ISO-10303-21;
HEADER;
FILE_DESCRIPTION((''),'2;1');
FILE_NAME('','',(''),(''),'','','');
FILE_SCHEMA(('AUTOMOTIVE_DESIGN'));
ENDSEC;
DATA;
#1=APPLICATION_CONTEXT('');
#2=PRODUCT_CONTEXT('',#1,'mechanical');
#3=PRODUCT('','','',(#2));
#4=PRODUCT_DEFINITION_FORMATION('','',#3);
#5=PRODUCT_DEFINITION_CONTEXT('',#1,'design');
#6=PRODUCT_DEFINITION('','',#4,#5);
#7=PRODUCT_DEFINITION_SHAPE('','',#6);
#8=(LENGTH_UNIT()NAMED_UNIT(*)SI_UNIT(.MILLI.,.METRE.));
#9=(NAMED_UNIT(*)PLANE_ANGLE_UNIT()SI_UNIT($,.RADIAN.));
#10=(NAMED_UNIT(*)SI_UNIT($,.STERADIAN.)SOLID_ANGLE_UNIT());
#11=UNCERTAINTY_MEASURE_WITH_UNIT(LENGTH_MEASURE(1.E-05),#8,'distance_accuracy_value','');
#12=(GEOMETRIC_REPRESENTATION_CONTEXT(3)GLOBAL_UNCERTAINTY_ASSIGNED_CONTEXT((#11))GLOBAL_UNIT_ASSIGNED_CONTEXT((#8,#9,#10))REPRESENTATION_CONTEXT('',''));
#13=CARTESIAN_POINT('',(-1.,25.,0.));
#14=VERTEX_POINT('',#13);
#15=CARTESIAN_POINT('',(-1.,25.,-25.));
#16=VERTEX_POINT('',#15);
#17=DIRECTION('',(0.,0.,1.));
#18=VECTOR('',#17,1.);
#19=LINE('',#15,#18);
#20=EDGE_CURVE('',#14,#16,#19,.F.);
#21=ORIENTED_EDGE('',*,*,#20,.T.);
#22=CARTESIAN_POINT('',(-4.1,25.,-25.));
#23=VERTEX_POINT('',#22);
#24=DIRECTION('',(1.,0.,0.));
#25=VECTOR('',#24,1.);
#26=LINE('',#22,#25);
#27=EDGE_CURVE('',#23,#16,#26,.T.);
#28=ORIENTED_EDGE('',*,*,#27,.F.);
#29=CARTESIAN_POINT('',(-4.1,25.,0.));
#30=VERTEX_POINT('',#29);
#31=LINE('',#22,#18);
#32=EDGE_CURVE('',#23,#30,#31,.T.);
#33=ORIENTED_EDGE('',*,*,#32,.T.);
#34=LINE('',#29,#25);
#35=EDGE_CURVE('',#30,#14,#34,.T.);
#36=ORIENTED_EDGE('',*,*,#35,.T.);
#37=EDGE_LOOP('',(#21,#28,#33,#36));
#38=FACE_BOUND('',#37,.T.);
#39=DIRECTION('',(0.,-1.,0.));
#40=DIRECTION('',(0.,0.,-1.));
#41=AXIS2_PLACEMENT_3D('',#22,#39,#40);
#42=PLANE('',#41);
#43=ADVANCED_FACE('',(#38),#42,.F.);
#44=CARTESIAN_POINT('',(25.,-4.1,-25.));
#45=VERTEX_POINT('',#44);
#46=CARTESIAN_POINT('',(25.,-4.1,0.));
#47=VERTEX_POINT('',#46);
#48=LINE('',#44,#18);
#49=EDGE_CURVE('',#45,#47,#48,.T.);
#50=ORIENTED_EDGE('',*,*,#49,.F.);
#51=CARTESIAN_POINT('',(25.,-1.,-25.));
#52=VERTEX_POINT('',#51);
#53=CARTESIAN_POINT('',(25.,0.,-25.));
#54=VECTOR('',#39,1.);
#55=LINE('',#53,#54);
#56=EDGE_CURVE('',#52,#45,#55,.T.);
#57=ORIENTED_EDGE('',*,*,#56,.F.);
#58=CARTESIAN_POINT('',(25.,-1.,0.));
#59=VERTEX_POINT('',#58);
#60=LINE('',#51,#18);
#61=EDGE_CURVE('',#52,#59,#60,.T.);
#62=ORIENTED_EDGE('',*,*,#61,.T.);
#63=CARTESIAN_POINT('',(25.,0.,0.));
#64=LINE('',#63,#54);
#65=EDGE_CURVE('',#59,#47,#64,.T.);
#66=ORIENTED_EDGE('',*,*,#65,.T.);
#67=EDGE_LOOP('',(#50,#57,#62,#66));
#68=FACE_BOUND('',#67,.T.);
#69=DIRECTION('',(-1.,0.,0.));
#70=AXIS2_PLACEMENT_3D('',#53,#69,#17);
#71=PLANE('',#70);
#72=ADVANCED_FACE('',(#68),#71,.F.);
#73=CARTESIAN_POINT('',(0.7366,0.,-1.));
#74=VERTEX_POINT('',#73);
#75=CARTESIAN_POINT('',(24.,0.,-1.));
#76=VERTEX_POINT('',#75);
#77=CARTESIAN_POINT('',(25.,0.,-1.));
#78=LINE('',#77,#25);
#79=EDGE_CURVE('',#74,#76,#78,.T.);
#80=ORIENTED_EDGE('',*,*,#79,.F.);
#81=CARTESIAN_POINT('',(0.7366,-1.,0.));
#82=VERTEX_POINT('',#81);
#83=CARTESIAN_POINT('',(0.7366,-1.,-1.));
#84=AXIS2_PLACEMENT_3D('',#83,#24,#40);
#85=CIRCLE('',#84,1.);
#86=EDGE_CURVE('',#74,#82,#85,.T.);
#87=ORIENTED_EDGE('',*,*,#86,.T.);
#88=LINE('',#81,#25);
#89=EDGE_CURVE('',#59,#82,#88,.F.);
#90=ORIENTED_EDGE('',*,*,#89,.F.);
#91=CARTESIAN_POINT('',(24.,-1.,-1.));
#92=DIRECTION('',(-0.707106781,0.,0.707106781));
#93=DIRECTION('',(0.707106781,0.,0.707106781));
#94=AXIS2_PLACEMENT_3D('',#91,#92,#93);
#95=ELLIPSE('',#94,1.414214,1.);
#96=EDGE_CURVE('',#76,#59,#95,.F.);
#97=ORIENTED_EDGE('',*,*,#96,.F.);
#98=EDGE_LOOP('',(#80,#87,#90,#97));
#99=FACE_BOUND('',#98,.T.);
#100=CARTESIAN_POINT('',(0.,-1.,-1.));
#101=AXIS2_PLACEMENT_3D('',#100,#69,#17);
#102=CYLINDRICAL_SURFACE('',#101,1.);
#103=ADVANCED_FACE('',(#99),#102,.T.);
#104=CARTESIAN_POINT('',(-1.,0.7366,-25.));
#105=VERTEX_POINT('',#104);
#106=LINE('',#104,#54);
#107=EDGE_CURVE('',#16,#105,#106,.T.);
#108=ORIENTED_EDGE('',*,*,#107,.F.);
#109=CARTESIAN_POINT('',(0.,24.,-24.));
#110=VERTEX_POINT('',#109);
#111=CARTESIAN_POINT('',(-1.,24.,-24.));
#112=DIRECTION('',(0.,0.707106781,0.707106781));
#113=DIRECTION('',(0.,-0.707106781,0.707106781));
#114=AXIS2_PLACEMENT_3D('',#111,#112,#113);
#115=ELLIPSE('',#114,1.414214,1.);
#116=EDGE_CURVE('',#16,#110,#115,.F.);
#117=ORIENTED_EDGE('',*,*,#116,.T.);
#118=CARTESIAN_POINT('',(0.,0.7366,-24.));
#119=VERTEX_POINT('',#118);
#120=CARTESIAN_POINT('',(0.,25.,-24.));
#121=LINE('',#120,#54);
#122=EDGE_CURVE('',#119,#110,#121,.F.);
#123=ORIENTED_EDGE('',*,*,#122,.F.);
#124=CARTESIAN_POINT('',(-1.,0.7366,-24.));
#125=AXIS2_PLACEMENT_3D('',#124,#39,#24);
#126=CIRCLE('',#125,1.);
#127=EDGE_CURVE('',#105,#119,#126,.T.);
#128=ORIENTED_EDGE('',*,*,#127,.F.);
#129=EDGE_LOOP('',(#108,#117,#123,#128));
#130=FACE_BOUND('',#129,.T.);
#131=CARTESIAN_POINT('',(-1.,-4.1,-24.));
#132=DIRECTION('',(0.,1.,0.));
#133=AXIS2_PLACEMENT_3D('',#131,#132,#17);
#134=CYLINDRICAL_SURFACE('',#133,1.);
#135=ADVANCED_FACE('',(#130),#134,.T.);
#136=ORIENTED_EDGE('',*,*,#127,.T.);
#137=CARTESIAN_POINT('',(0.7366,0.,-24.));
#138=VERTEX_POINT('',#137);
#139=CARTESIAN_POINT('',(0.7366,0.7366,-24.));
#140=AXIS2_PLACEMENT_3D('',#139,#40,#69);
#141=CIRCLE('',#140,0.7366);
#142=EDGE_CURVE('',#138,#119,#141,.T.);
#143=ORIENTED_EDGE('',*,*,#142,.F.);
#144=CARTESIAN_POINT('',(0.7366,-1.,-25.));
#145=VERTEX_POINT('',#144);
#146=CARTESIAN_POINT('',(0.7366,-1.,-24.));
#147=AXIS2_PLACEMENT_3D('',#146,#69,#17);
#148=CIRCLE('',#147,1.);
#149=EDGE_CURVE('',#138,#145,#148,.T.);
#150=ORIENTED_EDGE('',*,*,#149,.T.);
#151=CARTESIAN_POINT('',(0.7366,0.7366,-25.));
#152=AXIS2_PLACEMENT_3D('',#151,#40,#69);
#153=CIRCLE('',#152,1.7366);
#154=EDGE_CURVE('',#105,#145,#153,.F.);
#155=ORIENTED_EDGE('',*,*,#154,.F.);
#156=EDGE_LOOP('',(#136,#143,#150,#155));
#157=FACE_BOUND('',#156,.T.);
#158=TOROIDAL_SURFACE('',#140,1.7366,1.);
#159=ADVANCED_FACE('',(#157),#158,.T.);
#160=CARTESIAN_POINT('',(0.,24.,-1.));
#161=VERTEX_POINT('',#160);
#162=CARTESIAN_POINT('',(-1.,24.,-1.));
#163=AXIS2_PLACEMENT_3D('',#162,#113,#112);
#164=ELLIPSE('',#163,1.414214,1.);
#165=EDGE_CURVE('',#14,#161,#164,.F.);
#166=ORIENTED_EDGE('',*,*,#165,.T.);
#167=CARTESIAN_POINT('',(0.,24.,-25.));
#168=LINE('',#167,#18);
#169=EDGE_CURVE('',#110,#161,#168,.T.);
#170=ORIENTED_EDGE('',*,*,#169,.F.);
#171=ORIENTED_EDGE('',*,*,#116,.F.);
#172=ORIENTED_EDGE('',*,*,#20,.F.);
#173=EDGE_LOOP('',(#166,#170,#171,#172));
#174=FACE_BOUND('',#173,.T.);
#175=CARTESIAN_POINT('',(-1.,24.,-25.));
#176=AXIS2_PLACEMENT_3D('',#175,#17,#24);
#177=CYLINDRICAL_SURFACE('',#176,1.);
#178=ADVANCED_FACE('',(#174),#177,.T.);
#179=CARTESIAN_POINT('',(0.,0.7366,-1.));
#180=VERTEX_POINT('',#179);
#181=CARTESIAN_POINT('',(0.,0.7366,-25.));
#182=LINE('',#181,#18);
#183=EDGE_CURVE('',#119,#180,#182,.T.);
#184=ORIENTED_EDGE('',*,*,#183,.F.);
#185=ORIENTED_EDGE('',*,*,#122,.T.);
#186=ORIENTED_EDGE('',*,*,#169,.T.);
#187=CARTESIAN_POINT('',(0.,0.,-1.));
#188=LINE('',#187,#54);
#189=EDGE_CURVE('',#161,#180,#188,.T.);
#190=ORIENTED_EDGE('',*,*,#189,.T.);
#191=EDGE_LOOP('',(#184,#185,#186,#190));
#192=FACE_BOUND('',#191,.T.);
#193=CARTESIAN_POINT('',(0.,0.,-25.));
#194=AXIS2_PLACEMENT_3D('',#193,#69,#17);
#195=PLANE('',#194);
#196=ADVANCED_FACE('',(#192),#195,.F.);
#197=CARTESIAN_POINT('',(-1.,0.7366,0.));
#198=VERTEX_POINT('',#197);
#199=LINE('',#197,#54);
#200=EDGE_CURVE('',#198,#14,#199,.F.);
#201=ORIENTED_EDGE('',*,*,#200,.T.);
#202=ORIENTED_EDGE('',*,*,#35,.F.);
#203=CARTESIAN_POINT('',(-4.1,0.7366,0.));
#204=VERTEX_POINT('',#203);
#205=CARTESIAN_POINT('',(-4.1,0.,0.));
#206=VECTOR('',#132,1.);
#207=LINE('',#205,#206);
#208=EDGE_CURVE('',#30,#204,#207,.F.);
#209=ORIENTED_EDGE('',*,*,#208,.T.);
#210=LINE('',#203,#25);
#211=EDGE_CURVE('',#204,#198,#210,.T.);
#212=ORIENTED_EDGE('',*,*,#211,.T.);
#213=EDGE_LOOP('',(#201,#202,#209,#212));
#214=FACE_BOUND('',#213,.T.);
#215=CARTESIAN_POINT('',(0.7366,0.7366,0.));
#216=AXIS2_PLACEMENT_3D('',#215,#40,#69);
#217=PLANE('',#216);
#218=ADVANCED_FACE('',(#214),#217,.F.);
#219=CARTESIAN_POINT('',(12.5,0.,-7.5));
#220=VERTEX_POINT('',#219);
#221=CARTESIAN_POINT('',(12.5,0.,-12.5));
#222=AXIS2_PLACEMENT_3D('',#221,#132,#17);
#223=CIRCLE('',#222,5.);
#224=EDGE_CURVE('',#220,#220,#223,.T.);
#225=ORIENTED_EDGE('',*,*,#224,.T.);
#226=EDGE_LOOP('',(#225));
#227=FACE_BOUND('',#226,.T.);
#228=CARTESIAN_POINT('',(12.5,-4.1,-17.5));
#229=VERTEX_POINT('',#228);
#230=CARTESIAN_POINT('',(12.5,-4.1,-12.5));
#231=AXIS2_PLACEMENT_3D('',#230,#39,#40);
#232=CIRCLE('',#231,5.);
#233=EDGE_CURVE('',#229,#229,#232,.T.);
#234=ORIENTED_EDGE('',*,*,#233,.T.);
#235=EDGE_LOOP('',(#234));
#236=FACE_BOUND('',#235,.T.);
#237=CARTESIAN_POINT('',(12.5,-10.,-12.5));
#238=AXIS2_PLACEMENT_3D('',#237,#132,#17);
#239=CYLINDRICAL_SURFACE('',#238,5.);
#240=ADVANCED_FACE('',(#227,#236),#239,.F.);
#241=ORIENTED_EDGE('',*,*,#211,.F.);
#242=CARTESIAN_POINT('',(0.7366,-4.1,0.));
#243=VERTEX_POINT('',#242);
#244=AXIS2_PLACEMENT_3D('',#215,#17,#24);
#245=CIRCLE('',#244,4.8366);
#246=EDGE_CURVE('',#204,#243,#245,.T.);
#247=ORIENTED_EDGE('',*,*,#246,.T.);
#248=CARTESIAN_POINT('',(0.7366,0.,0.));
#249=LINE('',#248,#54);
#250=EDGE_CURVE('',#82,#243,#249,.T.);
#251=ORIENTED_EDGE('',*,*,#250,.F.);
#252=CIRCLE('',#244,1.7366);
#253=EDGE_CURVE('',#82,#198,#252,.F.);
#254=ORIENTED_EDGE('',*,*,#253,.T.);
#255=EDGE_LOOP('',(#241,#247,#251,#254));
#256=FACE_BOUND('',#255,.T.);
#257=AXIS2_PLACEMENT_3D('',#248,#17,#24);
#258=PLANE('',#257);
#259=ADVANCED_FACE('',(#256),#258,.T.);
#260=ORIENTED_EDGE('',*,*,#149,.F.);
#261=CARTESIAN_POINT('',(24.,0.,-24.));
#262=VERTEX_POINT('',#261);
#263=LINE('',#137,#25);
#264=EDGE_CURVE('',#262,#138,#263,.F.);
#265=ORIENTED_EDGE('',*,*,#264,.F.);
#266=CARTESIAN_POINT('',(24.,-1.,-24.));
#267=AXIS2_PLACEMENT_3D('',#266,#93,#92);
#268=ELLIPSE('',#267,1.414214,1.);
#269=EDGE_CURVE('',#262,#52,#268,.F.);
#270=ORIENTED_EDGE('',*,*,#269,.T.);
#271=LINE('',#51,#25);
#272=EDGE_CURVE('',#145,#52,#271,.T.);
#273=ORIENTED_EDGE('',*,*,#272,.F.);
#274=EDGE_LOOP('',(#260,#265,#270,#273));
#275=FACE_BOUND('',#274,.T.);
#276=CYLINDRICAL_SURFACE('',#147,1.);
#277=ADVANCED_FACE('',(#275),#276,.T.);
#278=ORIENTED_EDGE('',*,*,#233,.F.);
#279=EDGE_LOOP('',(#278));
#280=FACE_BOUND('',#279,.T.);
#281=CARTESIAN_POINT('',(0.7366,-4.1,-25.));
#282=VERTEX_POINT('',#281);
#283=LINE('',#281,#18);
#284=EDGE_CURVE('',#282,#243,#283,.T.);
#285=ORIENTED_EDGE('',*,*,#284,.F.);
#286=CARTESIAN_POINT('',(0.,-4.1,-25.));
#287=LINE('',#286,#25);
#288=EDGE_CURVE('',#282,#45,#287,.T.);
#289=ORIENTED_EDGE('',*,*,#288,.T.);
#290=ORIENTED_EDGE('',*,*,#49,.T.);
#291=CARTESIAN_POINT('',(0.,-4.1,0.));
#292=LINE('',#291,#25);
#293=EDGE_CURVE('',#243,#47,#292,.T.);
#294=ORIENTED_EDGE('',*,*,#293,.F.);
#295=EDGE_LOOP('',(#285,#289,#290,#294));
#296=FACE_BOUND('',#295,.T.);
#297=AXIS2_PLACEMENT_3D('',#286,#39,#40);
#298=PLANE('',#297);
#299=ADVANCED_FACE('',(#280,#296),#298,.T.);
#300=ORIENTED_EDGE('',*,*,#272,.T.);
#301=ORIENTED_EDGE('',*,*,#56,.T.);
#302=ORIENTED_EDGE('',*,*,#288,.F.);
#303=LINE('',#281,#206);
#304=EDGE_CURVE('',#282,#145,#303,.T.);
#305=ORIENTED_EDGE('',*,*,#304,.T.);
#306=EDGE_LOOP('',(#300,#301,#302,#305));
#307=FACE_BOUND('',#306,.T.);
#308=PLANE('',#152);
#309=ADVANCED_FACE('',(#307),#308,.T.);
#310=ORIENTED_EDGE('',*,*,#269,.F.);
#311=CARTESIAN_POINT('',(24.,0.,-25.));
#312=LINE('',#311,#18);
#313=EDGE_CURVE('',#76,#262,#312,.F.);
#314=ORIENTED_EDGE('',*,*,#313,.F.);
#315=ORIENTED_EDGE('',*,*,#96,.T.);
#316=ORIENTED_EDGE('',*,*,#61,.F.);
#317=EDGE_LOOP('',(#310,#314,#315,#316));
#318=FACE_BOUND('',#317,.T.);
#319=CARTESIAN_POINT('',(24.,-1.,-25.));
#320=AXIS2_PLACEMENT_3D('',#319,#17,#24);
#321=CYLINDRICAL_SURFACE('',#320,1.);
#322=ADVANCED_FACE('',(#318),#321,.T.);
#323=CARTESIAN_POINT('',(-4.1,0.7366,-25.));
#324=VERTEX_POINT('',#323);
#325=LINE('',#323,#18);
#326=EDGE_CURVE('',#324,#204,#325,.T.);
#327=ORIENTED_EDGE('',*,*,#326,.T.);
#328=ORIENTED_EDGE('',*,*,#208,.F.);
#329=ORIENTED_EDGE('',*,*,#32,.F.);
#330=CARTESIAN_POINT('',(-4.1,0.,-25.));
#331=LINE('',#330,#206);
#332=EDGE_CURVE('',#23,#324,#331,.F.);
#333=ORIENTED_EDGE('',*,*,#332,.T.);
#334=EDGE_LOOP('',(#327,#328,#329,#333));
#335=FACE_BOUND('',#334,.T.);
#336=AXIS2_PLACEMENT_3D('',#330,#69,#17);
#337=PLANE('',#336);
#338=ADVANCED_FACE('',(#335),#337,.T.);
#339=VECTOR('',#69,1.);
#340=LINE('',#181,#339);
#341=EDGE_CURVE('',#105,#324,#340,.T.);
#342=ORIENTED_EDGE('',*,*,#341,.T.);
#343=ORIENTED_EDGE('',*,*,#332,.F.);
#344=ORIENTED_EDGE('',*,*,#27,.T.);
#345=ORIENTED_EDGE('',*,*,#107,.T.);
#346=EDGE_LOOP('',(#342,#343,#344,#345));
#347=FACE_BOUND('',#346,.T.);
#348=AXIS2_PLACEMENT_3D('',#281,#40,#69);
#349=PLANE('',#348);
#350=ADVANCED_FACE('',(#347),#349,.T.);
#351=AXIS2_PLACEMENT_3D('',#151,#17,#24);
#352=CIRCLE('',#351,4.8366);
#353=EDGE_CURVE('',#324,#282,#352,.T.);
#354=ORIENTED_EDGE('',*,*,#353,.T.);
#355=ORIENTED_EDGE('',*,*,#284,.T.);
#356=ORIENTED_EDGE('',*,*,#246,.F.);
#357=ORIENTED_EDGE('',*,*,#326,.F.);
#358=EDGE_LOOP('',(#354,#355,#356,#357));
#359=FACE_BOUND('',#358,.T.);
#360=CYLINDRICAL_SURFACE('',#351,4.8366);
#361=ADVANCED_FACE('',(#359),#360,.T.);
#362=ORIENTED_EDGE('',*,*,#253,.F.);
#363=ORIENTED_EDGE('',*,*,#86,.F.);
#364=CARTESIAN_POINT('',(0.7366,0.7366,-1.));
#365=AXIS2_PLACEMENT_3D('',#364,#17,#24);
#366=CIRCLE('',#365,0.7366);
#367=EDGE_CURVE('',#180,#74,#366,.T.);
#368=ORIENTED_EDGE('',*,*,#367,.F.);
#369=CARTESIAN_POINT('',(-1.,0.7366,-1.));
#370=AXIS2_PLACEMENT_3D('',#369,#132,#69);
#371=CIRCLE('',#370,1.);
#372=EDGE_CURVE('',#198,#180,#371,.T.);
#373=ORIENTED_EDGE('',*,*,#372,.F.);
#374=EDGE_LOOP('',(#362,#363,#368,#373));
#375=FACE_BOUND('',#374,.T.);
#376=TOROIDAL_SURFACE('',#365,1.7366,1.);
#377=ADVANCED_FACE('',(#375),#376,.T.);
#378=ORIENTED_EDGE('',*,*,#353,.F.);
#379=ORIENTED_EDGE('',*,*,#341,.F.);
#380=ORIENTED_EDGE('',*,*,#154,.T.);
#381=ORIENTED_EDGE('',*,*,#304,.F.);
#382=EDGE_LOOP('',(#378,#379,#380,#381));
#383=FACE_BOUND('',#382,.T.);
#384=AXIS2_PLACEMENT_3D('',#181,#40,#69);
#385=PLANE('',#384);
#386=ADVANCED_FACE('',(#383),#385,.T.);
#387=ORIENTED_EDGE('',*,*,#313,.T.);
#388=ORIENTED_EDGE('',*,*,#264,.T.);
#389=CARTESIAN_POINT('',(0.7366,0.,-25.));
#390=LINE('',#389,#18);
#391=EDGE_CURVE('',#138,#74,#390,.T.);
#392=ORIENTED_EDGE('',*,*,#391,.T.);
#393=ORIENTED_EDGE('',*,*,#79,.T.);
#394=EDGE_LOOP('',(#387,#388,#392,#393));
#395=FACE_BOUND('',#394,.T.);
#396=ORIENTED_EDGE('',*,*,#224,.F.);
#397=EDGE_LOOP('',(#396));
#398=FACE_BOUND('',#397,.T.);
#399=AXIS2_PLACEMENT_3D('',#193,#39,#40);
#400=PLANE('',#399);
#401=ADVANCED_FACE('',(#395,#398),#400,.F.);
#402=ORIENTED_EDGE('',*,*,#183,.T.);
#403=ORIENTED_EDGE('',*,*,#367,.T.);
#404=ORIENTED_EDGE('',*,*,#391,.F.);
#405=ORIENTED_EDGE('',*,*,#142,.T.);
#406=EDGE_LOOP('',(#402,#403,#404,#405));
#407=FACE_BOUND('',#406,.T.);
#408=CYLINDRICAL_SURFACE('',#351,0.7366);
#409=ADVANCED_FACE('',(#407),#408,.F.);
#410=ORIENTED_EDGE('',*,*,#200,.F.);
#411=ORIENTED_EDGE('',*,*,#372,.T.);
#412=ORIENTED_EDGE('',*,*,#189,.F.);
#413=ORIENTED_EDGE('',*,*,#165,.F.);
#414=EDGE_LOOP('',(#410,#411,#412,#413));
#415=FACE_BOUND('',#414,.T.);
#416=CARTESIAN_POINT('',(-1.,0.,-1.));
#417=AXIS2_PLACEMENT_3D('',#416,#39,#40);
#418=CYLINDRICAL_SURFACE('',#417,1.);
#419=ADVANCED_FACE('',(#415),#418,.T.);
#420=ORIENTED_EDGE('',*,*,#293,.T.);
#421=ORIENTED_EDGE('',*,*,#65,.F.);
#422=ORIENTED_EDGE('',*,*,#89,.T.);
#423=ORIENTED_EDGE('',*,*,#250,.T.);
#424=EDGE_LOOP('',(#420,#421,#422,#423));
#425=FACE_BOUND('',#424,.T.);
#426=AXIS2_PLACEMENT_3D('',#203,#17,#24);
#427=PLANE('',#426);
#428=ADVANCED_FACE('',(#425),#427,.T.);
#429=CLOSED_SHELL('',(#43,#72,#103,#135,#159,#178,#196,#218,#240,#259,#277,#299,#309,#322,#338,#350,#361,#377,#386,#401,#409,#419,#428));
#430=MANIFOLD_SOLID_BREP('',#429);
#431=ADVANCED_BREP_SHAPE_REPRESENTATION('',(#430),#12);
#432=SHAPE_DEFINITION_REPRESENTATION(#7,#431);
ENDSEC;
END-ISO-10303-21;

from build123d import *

# Parameters (mm, degrees)
BASE_FLANGE1_DEPTH = 25
FILLET1_R          = 1
SKETCH6_R          = 5
CUT_EXTRUDE1_DEPTH = 10


# Sheet-metal steps are written as plain solids
with BuildPart() as part:
    # Sketch1 → Base-Flange1 (new body)
    with BuildSketch(Plane.XY):
        with BuildLine():
            Line((25, 0), (0.7366, 0))
            ThreePointArc((0.7366, 0), (0.215745145, 0.215745145), (0, 0.7366))
            Line((0, 0.7366), (0, 25))
            Line((0, 25), (-4.1, 25))
            Line((-4.1, 25), (-4.1, 0.7366))
            ThreePointArc((-4.1, 0.7366), (-2.683392658, -2.683392658), (0.7366, -4.1))
            Line((0.7366, -4.1), (25, -4.1))
            Line((25, -4.1), (25, 0))
        make_face()
    extrude(amount=-BASE_FLANGE1_DEPTH)

    # Fillet1
    fillet1_edges = [part.edges().sort_by_distance(p)[0] for p in [
        (0, 25, -12.5),
        (12.8683, 0, -25),
        (25, 0, -12.5),
        (0.215745145, 0.215745145, -25),
        (0, 12.8683, -25),
        (0, 12.8683, 0),
        (0.215745145, 0.215745145, 0),
        (12.8683, 0, 0),
    ]]
    fillet(fillet1_edges, radius=FILLET1_R)

    # Sketch6 → Cut-Extrude1 (cut)
    with BuildSketch(Plane(origin=(0, 0, 0), x_dir=(1, 0, 0), z_dir=(0, 1, 0))):
        with Locations(Location((12.5, 12.5, 0), (0, 0, 270))):
            Circle(SKETCH6_R)
    extrude(amount=-CUT_EXTRUDE1_DEPTH, mode=Mode.SUBTRACT)


solid = part.part
